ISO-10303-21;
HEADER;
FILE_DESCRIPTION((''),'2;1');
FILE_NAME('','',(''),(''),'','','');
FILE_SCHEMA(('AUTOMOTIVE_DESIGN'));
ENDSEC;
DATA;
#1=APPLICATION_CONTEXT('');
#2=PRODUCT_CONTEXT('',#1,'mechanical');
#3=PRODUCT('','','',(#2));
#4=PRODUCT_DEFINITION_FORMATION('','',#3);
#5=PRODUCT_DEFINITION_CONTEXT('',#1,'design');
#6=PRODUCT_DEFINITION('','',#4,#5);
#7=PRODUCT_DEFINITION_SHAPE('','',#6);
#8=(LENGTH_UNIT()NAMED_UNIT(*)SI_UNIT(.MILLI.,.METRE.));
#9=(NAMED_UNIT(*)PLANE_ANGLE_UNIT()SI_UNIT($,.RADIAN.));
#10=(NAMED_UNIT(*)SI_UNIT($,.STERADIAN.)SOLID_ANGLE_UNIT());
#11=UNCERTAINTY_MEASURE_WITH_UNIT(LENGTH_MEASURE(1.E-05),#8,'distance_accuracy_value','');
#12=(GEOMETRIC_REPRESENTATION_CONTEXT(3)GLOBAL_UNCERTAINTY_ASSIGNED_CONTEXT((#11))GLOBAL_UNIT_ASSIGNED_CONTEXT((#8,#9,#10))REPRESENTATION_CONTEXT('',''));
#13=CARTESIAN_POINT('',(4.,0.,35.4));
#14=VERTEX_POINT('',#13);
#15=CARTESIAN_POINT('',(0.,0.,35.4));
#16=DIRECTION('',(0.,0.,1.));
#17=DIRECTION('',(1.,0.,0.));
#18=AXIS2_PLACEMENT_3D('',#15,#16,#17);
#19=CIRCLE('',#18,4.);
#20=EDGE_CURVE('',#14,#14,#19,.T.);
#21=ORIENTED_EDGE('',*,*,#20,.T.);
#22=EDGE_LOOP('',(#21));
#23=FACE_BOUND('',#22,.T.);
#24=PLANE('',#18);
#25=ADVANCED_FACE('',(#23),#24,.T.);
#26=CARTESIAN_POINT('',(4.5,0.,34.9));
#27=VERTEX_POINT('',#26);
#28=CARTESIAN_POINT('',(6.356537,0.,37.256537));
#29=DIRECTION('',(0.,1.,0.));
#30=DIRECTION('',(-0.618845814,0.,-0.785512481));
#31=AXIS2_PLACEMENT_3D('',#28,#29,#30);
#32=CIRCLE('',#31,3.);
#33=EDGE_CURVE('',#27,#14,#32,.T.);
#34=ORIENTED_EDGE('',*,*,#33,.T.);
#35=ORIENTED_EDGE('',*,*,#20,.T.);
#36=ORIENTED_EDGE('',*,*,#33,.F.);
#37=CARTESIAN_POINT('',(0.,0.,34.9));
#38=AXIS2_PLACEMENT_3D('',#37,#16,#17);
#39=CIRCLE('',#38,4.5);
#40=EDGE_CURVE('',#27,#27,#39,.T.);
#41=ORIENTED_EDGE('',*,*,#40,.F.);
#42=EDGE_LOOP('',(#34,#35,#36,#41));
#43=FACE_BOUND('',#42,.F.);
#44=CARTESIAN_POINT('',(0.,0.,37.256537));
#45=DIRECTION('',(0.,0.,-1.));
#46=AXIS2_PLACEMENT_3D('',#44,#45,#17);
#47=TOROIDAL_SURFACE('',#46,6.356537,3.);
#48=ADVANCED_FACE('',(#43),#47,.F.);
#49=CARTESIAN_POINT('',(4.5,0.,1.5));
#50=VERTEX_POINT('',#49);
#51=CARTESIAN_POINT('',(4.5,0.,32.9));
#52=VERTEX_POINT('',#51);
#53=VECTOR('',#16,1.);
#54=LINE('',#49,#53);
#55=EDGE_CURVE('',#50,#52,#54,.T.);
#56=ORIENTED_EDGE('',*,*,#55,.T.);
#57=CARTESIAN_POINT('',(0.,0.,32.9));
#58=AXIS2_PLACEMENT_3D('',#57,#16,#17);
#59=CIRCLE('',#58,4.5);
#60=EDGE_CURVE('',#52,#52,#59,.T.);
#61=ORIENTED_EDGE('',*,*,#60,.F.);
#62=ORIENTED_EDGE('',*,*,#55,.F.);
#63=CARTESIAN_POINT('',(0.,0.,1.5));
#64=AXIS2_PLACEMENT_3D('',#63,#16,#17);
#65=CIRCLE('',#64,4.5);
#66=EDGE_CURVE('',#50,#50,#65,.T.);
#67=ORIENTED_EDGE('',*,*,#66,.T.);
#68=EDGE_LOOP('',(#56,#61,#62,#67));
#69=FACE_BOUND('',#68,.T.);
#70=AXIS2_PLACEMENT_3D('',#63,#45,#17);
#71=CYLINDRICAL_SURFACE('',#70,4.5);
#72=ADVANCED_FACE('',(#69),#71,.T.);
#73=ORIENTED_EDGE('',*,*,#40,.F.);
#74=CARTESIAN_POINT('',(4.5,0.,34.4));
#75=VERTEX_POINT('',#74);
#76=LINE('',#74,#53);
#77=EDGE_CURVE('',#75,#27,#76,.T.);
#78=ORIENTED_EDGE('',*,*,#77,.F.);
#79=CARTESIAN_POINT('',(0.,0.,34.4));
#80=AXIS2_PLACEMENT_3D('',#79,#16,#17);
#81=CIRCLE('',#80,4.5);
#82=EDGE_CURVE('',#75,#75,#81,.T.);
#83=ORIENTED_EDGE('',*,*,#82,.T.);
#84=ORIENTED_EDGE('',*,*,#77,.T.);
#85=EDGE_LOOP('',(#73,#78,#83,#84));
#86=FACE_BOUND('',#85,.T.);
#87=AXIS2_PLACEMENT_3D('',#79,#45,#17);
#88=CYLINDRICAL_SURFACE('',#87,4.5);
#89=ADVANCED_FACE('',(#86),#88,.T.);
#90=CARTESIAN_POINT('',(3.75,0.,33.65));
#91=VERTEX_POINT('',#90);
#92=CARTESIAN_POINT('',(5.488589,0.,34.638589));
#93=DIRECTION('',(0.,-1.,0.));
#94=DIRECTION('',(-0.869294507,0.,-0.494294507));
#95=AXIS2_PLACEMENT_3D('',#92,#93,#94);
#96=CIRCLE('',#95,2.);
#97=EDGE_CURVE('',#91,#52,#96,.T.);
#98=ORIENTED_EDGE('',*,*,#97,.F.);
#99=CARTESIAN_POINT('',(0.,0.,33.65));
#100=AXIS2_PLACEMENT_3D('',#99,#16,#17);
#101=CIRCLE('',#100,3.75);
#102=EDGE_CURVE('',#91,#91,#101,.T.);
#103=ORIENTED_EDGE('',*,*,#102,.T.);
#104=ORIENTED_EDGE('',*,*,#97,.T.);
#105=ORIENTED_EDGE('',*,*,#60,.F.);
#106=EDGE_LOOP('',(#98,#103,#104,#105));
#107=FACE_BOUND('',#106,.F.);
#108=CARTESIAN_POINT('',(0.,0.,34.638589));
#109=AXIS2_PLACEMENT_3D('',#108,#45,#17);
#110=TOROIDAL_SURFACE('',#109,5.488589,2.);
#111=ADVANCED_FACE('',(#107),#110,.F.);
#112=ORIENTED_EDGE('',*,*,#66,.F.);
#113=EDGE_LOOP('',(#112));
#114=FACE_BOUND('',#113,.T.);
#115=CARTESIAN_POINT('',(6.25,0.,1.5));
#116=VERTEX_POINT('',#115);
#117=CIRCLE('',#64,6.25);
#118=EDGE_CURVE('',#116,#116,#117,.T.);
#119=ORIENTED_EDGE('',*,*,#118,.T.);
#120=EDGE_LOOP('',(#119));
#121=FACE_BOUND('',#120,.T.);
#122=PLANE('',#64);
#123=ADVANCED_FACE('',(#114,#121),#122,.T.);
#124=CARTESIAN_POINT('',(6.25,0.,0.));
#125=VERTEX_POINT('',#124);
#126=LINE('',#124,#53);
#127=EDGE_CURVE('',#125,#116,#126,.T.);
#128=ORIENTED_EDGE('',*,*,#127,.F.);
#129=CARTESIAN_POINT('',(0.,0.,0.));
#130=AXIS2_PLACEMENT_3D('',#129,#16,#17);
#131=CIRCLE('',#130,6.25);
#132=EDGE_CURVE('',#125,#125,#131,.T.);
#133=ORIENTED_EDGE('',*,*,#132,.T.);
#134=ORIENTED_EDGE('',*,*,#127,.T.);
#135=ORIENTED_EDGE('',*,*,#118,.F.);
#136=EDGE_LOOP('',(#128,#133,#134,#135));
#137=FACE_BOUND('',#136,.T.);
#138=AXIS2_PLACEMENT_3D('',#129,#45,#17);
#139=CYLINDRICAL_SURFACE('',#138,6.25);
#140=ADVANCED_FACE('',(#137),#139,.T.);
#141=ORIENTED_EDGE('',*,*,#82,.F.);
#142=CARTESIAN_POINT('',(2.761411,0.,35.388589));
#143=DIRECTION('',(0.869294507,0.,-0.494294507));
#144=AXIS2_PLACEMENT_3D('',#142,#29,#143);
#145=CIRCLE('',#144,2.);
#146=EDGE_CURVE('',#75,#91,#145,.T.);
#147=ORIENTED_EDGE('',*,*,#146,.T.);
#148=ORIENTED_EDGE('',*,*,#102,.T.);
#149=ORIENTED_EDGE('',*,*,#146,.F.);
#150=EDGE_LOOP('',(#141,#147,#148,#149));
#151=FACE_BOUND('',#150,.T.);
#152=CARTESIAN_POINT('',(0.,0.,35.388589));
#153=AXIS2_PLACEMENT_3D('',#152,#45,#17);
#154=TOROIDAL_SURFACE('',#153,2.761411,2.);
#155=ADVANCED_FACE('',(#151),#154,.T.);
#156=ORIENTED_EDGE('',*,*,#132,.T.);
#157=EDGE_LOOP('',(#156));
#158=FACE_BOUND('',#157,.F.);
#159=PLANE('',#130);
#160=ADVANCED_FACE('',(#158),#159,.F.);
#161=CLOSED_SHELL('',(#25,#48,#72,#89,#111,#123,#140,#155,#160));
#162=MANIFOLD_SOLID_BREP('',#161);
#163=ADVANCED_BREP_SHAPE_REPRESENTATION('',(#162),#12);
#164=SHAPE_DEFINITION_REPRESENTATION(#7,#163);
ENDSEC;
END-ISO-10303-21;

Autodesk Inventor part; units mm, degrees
ref_plane "YZ Plane" through (0, 0, 0) normal (1, 0, 0) x (0, 1, 0)
ref_plane "XZ Plane" through (0, 0, 0) normal (0, 1, 0) x (-1, 0, 0)
ref_plane "XY Plane" through (0, 0, 0) normal (0, 0, 1) x (1, 0, 0)
sketch "Sketch1" plane through (0, 0, 0) normal (0, 0, 1) x (1, 0, 0)
  circle A0 centre (0, 0) radius 6.25
  dimension "d0" = 12.5
extrude "Extrusion1" add sketch "Sketch1" along normal blind 1.5
sketch "Sketch2" plane through (0, 0, 1.5) normal (0, 0, 1) x (1, 0, 0)
  circle A0 centre (0, 0) radius 6.25 projected
  circle A1 centre (0, 0) radius 4.5
  dimension "d3" = 9
extrude "Extrusion2" add sketch "Sketch2" along normal blind 31.4 contours A1
sketch "Sketch3" plane through (0, 0, 32.9) normal (0, 0, 1) x (1, 0, 0)
  circle A0 centre (0, 0) radius 4.5 projected
  circle A1 centre (0, 0) radius 3.75
  dimension "d6" = 7.5
extrude "Extrusion3" add sketch "Sketch3" along normal blind 0.75 contours A1
fillet "Fillet1" radius 2 1 edges at (-3.75, 0, 32.9)
sketch "Sketch4" plane through (0, 0, 33.65) normal (0, 0, 1) x (1, 0, 0)
  circle A0 centre (0, 0) radius 4.5
  dimension "d10" = 9
extrude "Extrusion4" add sketch "Sketch4" along normal blind 0.75
fillet "Fillet2" radius 2 1 edges at (-4.5, 0, 33.65)
sketch "Sketch5" plane through (0, 0, 34.4) normal (0, 0, 1) x (1, 0, 0)
  circle A0 centre (0, 0) radius 4.5
  dimension "d14" = 9
extrude "Extrusion5" add sketch "Sketch5" along normal blind 0.5
sketch "Sketch6" plane through (0, 0, 34.9) normal (0, 0, 1) x (1, 0, 0)
  circle A0 centre (0, 0) radius 4
  dimension "d17" = 8
extrude "Extrusion6" add sketch "Sketch6" along normal blind 0.5
fillet "Fillet3" radius 3 1 edges at (-4, 0, 34.9)
properties part number "Long Pin_3DPrint"
